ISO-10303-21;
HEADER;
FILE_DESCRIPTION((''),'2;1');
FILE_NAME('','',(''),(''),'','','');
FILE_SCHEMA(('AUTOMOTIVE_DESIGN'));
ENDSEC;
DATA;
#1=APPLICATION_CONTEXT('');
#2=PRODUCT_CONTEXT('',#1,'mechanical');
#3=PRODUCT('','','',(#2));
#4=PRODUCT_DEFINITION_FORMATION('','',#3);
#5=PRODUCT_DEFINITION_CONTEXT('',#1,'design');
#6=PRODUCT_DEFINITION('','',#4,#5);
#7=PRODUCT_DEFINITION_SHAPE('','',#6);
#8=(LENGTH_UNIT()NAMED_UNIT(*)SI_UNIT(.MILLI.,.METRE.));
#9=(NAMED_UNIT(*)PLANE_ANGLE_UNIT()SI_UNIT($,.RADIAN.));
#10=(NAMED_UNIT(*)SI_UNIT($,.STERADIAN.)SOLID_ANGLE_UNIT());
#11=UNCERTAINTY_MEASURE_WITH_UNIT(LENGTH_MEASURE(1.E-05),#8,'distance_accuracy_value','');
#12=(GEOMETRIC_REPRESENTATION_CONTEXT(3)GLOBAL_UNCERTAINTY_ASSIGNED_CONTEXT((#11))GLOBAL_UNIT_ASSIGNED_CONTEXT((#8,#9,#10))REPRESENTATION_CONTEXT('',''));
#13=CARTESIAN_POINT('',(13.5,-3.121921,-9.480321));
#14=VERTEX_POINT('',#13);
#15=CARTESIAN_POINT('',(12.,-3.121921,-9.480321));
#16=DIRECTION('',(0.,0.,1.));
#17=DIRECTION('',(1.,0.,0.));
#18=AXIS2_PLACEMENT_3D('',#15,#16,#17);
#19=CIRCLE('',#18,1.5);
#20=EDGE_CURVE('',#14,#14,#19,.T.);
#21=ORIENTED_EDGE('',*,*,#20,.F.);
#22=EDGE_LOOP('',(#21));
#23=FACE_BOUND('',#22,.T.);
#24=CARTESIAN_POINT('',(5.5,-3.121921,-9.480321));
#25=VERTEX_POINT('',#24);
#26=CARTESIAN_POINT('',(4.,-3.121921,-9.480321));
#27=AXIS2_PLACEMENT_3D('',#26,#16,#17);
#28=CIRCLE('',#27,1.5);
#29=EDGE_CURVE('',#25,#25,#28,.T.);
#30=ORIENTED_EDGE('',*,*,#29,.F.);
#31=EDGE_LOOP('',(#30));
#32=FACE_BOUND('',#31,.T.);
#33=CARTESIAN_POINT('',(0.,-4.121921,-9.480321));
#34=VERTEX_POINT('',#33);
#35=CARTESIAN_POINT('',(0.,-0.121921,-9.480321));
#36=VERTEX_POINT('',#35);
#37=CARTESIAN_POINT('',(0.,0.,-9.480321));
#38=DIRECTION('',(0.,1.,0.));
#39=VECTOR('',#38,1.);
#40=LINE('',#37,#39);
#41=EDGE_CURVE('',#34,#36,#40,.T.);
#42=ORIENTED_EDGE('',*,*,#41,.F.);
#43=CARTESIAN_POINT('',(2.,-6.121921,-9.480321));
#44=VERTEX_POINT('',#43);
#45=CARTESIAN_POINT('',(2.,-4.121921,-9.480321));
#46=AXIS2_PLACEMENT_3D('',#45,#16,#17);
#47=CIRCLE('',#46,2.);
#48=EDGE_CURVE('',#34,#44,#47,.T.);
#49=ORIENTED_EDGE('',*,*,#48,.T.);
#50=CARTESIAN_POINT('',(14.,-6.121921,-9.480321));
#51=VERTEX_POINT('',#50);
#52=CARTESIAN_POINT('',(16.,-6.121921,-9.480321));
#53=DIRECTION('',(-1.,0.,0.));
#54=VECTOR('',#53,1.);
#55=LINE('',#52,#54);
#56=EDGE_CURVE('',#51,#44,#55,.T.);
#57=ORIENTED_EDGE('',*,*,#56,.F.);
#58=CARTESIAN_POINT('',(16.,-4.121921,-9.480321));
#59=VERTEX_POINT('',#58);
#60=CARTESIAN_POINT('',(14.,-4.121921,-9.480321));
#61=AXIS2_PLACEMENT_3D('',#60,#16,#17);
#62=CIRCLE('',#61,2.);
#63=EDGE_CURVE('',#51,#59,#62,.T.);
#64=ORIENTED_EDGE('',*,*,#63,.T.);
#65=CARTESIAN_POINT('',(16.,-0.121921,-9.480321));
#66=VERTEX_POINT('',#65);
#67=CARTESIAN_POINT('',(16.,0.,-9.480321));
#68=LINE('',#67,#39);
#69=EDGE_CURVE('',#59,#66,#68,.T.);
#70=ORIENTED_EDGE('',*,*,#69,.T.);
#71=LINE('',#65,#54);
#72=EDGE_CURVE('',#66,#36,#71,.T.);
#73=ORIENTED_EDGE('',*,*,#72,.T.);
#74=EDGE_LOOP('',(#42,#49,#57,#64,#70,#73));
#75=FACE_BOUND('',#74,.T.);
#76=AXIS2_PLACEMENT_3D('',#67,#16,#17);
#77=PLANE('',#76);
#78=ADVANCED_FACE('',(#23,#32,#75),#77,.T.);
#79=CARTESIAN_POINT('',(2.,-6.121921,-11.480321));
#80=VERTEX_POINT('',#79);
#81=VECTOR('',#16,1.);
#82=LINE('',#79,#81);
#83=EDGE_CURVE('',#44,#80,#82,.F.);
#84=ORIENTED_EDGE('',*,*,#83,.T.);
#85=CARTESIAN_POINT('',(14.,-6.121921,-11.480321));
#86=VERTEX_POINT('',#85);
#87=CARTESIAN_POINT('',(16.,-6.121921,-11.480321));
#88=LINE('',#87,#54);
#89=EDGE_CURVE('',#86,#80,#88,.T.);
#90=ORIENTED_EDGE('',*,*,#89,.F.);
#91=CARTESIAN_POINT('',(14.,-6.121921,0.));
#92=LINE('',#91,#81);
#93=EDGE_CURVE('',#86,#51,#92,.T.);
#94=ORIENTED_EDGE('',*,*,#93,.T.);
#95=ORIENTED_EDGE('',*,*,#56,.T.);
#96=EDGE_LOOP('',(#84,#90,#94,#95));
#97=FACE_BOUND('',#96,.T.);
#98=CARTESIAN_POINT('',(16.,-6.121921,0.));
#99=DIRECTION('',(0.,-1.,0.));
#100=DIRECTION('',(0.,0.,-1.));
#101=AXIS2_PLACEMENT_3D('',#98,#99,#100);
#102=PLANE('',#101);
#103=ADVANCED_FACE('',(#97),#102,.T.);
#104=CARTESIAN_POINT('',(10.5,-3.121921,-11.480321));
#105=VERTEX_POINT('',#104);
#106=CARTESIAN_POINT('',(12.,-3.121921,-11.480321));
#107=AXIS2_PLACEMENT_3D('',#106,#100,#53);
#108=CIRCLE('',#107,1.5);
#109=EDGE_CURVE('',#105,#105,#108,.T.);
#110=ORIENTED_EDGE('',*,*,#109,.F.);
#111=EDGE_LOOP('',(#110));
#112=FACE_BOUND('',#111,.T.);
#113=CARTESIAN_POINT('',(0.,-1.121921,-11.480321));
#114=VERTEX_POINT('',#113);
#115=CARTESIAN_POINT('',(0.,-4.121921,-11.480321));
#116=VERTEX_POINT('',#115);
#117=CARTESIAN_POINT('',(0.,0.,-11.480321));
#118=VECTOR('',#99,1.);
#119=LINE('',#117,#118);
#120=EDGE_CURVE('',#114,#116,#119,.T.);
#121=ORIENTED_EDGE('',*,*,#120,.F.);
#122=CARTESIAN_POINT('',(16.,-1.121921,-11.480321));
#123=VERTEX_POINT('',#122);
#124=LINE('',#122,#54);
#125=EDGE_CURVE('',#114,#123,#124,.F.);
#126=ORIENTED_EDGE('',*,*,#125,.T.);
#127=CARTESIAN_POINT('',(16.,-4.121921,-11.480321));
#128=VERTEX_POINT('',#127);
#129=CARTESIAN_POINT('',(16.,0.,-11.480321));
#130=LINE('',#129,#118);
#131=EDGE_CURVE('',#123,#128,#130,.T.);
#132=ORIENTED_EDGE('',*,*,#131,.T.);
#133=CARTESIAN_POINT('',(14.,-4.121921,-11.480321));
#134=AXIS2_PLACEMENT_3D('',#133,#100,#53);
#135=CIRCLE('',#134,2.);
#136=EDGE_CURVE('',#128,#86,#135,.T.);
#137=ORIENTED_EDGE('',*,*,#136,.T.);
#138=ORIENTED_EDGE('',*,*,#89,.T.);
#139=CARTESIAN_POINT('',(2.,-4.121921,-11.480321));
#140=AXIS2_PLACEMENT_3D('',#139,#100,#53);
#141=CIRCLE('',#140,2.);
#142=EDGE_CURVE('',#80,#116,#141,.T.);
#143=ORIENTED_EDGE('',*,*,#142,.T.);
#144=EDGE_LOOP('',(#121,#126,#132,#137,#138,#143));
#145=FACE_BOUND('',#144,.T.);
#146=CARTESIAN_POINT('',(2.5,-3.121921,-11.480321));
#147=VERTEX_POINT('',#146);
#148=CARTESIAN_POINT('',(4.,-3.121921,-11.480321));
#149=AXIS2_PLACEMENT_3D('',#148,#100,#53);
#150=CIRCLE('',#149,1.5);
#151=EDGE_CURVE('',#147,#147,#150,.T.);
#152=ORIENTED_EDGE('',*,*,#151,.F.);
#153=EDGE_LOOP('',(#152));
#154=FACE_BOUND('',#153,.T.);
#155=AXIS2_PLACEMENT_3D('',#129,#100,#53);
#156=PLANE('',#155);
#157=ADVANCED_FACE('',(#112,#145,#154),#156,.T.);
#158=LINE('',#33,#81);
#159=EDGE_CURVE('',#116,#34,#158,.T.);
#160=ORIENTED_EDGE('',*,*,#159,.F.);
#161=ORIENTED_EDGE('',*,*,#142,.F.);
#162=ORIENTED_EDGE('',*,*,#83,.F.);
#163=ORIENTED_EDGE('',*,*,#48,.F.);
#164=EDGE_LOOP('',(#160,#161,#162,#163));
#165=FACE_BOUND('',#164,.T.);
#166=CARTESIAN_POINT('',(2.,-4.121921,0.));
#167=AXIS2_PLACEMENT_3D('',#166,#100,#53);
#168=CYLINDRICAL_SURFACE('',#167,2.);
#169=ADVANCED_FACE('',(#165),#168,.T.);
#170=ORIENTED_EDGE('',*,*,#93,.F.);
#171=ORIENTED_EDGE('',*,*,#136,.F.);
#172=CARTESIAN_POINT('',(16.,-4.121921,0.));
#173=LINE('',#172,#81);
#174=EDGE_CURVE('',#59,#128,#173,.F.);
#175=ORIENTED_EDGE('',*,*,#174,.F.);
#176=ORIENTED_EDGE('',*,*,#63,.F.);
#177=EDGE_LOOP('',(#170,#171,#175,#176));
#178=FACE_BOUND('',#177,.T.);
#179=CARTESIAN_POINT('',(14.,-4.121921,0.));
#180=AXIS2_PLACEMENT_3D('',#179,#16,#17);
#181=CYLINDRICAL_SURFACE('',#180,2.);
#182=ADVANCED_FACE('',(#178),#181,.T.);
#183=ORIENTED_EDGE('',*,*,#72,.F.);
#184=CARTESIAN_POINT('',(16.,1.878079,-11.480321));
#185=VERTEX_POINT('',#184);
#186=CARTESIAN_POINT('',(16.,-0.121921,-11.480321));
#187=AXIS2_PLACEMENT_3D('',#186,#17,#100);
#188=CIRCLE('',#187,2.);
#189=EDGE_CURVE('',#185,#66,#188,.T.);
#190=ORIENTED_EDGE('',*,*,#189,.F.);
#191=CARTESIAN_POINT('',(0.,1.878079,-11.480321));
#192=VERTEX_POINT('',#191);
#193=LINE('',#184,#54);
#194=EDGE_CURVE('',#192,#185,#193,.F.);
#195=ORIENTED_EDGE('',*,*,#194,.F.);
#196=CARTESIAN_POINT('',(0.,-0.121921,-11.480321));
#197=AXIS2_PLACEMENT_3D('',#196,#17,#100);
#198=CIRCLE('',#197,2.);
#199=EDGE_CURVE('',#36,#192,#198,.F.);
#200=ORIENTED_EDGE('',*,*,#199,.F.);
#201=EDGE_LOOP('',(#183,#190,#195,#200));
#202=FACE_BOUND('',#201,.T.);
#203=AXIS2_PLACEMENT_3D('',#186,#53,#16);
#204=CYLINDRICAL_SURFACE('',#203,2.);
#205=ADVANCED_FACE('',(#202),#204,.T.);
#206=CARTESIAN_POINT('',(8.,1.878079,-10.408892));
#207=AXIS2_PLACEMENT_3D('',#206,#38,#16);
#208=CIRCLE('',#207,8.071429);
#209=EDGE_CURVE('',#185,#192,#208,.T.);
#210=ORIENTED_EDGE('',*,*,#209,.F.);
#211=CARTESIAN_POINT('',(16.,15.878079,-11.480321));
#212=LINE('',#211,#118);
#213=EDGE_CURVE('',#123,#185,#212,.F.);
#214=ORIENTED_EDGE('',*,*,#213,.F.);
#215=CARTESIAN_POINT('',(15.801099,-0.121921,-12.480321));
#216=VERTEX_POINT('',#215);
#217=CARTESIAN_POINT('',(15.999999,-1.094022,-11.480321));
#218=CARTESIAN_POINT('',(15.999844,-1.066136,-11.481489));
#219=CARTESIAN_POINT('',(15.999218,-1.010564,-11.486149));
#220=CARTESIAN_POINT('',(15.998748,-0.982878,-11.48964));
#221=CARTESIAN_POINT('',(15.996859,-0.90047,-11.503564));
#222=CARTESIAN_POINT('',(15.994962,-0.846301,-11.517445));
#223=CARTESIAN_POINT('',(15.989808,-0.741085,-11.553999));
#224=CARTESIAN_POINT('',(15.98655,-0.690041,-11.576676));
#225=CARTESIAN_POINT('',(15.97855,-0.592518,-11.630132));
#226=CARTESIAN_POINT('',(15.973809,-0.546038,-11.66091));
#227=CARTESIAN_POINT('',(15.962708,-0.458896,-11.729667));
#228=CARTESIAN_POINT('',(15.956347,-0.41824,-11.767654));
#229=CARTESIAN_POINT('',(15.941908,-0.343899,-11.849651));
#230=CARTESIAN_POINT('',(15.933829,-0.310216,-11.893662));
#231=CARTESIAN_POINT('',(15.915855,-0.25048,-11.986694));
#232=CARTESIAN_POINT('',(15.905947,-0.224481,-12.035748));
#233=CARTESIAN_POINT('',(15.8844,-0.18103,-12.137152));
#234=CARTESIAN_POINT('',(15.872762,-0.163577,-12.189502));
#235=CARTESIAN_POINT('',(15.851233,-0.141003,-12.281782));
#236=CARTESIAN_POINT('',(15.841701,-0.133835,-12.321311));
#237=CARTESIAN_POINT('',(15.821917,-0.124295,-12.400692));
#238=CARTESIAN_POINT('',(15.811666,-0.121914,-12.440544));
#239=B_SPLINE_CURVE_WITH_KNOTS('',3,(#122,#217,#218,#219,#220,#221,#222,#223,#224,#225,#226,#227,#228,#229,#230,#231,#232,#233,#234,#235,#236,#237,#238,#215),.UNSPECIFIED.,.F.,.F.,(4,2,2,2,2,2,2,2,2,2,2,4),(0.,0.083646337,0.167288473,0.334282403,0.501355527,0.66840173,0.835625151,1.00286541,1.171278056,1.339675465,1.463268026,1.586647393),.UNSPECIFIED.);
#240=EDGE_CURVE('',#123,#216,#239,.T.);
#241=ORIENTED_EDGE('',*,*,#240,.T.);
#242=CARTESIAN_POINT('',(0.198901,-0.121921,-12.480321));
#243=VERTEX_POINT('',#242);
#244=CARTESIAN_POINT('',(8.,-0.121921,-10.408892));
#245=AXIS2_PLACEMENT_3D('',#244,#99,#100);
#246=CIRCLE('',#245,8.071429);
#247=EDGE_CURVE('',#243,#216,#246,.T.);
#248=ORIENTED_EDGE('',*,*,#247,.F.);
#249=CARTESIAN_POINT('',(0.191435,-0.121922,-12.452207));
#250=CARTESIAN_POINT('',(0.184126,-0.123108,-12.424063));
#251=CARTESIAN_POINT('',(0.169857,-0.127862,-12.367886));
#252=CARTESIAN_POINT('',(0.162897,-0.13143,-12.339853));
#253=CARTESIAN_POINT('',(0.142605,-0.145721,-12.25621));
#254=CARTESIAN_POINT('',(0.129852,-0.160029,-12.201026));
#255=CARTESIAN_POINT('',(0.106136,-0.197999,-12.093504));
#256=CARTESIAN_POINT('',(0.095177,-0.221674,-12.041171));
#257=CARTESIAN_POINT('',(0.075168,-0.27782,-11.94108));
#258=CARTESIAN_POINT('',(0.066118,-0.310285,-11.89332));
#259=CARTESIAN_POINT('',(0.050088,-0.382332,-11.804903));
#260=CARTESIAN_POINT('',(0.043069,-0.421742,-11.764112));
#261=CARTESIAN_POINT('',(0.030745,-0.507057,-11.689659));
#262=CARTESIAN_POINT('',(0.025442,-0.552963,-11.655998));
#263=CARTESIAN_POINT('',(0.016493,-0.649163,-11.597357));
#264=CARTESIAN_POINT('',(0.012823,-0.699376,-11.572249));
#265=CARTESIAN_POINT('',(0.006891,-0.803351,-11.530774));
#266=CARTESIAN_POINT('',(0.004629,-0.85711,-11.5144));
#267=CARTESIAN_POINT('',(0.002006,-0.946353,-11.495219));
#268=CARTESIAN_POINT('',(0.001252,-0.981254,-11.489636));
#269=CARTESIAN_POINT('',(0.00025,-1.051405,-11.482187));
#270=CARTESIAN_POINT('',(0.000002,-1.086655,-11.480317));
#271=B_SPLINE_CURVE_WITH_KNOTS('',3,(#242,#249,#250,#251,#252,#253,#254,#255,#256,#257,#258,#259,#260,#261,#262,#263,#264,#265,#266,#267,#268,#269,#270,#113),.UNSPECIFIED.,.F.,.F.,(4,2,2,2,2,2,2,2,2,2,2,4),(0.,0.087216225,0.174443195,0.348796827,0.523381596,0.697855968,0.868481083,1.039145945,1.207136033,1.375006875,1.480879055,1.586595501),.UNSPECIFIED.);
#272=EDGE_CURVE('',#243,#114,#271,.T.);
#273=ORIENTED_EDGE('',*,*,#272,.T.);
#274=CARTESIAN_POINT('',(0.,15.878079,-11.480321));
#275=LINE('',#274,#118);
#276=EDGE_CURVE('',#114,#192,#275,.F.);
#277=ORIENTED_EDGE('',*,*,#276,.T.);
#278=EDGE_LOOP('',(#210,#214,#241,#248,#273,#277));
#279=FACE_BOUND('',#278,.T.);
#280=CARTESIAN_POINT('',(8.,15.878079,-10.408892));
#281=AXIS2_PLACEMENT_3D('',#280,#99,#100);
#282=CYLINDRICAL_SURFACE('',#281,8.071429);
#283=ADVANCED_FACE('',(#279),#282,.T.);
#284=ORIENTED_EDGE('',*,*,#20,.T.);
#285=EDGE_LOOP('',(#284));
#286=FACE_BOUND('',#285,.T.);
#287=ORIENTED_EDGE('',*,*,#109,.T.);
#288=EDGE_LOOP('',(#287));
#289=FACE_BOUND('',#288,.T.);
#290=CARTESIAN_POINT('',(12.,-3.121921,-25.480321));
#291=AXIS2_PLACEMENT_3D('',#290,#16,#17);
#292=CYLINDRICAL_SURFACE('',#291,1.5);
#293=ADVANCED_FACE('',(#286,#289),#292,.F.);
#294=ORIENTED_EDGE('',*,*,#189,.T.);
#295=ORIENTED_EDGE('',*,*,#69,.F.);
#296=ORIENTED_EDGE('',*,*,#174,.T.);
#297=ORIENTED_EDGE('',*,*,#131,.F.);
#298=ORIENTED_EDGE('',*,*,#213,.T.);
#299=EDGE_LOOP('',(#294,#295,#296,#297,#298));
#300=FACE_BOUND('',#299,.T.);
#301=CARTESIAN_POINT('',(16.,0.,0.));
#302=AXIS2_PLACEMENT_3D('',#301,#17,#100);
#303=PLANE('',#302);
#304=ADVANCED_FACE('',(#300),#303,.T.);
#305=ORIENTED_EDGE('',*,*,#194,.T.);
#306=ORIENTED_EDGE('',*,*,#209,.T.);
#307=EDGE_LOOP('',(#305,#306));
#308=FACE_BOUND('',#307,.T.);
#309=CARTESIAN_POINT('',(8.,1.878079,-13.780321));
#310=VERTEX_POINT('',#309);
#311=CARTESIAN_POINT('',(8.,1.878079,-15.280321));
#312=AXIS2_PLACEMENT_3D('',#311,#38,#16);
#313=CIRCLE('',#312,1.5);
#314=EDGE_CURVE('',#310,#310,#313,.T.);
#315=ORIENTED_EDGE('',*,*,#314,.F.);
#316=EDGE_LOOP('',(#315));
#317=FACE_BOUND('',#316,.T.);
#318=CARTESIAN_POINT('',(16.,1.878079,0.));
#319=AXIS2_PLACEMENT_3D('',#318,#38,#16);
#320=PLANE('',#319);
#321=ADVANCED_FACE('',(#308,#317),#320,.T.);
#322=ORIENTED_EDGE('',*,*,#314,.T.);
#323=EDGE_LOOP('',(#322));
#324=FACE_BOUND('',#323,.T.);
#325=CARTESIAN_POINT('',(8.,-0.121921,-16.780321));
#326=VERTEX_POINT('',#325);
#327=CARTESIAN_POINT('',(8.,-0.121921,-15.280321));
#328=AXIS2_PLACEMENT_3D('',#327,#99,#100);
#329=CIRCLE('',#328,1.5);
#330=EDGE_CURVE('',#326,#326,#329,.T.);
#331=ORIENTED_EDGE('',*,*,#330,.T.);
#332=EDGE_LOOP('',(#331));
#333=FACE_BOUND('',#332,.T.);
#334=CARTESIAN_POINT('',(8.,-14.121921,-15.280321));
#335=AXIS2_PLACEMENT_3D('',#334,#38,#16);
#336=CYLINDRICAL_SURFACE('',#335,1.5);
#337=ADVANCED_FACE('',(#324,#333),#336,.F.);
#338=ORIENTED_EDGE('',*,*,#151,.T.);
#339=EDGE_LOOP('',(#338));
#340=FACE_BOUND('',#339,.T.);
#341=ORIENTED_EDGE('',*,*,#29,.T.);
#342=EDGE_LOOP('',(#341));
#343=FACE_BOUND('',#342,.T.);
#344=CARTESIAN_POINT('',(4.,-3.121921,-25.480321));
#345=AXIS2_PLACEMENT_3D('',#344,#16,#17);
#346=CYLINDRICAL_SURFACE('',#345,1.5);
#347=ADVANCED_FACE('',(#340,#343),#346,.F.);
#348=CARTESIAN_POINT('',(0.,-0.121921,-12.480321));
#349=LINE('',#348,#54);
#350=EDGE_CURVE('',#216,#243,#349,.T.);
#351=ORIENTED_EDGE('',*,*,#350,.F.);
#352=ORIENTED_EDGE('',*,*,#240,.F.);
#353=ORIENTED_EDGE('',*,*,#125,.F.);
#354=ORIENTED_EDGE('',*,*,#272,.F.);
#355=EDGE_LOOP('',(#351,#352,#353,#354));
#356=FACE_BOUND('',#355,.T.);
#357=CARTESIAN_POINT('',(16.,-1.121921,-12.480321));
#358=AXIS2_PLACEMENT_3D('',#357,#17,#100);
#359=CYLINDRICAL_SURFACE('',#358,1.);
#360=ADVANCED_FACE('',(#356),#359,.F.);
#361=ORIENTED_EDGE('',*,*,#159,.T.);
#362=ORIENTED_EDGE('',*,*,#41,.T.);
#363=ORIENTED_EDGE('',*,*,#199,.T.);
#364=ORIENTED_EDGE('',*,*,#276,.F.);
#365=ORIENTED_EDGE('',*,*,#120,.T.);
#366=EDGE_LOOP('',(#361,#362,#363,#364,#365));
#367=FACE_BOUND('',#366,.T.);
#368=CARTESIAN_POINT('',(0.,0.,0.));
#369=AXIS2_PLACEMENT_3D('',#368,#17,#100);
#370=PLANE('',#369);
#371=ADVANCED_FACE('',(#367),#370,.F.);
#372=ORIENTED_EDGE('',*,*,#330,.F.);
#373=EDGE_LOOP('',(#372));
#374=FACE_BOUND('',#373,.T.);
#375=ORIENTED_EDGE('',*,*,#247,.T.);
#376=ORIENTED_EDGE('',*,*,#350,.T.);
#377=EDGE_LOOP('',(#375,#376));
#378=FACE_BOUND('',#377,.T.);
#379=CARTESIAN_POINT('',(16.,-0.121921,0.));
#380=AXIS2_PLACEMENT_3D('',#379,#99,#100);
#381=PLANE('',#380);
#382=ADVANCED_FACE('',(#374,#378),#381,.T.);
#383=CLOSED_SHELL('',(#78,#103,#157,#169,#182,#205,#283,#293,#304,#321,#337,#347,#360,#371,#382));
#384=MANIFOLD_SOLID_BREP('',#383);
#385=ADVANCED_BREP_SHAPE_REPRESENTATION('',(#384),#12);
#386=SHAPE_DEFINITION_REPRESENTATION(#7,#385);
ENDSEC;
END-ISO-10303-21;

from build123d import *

# Parameters (mm, degrees)
BOSS_EXTRUDE4_DEPTH = 16
CUT_EXTRUDE3_DEPTH  = 16
SKETCH16_R          = 1.5
CUT_EXTRUDE4_DEPTH  = 16
FILLET1_R           = 2
FILLET2_R           = 2
SKETCH17_R          = 1.5
CUT_EXTRUDE5_DEPTH  = 16
FILLET3_R           = 1


with BuildPart() as part:
    # Sketch14 → Boss-Extrude4 (new body)
    with BuildSketch(Plane(origin=(0, 0, 0), x_dir=(0, 0, -1), z_dir=(1, 0, 0))):
        Polygon((11.48032087, -6.121921179), (9.48032087, -6.121921179), (9.48032087, 1.878078821), (18.48032087, 1.878078821), (18.48032087, -0.121921179), (11.48032087, -0.121921179), align=None)
    extrude(amount=BOSS_EXTRUDE4_DEPTH)

    # Sketch15 → Cut-Extrude3 (cut)
    with BuildSketch(Plane.XZ.offset(0.121921179)):
        with BuildLine():
            ThreePointArc((8, -18.48032087), (2.684927094, -16.483261335), (0, -11.48032087))
            Line((0, -11.48032087), (0, -18.48032087))
            Line((0, -18.48032087), (8, -18.48032087))
        make_face()
        with BuildLine():
            Line((16, -18.48032087), (16, -11.48032087))
            ThreePointArc((16, -11.48032087), (13.315072906, -16.483261335), (8, -18.48032087))
            Line((8, -18.48032087), (16, -18.48032087))
        make_face()
    extrude(amount=-CUT_EXTRUDE3_DEPTH, mode=Mode.SUBTRACT)

    # Sketch16 → Cut-Extrude4 (cut)
    with BuildSketch(Plane.XY.offset(-9.48032087)):
        with Locations((4, -3.121921179)):
            Circle(SKETCH16_R)
        with Locations((12, -3.121921179)):
            Circle(SKETCH16_R)
    extrude(amount=-CUT_EXTRUDE4_DEPTH, mode=Mode.SUBTRACT)

    # Fillet1
    fillet1_edges = [part.edges().sort_by_distance(p)[0] for p in [
        (16, -6.121921179, -10.48032087),
        (0, -6.121921179, -10.48032087),
    ]]
    fillet(fillet1_edges, radius=FILLET1_R)

    # Fillet2
    fillet2_edges = [part.edges().sort_by_distance(p)[0] for p in [
        (8, 1.878078821, -9.48032087),
    ]]
    fillet(fillet2_edges, radius=FILLET2_R)

    # Sketch17 → Cut-Extrude5 (cut)
    with BuildSketch(Plane(origin=(0, 1.878078821, 0), x_dir=(1, 0, 0), z_dir=(0, 1, 0))):
        with Locations(Location((8, 15.28032087, 0), (0, 0, 270))):
            Circle(SKETCH17_R)
    extrude(amount=-CUT_EXTRUDE5_DEPTH, mode=Mode.SUBTRACT)

    # Fillet3
    # the kernel refuses this fillet: 1 mm, written as the material it adds along each edge
    with BuildSketch(Plane(origin=(0, -0.121921179, -11.48032087), x_dir=(0, -1, 0), z_dir=(1, 0, 0))) as fillet3_piece_1_section:
        with BuildLine():
            CenterArc((FILLET3_R, FILLET3_R), FILLET3_R, 180, 90)
            Line((0, FILLET3_R), (0, 0))
            Line((0, 0), (FILLET3_R, 0))
        make_face()
    fillet3_piece_1 = extrude(amount=16, mode=Mode.PRIVATE)
    fillet3_piece_1 = fillet3_piece_1 & Plane(origin=(8, -0.348905362, -10.408892299), x_dir=(0, 0, -1), z_dir=(0, -1, 0)) * Cylinder(8.071428571, 36, mode=Mode.PRIVATE)
    add(fillet3_piece_1)


solid = part.part
